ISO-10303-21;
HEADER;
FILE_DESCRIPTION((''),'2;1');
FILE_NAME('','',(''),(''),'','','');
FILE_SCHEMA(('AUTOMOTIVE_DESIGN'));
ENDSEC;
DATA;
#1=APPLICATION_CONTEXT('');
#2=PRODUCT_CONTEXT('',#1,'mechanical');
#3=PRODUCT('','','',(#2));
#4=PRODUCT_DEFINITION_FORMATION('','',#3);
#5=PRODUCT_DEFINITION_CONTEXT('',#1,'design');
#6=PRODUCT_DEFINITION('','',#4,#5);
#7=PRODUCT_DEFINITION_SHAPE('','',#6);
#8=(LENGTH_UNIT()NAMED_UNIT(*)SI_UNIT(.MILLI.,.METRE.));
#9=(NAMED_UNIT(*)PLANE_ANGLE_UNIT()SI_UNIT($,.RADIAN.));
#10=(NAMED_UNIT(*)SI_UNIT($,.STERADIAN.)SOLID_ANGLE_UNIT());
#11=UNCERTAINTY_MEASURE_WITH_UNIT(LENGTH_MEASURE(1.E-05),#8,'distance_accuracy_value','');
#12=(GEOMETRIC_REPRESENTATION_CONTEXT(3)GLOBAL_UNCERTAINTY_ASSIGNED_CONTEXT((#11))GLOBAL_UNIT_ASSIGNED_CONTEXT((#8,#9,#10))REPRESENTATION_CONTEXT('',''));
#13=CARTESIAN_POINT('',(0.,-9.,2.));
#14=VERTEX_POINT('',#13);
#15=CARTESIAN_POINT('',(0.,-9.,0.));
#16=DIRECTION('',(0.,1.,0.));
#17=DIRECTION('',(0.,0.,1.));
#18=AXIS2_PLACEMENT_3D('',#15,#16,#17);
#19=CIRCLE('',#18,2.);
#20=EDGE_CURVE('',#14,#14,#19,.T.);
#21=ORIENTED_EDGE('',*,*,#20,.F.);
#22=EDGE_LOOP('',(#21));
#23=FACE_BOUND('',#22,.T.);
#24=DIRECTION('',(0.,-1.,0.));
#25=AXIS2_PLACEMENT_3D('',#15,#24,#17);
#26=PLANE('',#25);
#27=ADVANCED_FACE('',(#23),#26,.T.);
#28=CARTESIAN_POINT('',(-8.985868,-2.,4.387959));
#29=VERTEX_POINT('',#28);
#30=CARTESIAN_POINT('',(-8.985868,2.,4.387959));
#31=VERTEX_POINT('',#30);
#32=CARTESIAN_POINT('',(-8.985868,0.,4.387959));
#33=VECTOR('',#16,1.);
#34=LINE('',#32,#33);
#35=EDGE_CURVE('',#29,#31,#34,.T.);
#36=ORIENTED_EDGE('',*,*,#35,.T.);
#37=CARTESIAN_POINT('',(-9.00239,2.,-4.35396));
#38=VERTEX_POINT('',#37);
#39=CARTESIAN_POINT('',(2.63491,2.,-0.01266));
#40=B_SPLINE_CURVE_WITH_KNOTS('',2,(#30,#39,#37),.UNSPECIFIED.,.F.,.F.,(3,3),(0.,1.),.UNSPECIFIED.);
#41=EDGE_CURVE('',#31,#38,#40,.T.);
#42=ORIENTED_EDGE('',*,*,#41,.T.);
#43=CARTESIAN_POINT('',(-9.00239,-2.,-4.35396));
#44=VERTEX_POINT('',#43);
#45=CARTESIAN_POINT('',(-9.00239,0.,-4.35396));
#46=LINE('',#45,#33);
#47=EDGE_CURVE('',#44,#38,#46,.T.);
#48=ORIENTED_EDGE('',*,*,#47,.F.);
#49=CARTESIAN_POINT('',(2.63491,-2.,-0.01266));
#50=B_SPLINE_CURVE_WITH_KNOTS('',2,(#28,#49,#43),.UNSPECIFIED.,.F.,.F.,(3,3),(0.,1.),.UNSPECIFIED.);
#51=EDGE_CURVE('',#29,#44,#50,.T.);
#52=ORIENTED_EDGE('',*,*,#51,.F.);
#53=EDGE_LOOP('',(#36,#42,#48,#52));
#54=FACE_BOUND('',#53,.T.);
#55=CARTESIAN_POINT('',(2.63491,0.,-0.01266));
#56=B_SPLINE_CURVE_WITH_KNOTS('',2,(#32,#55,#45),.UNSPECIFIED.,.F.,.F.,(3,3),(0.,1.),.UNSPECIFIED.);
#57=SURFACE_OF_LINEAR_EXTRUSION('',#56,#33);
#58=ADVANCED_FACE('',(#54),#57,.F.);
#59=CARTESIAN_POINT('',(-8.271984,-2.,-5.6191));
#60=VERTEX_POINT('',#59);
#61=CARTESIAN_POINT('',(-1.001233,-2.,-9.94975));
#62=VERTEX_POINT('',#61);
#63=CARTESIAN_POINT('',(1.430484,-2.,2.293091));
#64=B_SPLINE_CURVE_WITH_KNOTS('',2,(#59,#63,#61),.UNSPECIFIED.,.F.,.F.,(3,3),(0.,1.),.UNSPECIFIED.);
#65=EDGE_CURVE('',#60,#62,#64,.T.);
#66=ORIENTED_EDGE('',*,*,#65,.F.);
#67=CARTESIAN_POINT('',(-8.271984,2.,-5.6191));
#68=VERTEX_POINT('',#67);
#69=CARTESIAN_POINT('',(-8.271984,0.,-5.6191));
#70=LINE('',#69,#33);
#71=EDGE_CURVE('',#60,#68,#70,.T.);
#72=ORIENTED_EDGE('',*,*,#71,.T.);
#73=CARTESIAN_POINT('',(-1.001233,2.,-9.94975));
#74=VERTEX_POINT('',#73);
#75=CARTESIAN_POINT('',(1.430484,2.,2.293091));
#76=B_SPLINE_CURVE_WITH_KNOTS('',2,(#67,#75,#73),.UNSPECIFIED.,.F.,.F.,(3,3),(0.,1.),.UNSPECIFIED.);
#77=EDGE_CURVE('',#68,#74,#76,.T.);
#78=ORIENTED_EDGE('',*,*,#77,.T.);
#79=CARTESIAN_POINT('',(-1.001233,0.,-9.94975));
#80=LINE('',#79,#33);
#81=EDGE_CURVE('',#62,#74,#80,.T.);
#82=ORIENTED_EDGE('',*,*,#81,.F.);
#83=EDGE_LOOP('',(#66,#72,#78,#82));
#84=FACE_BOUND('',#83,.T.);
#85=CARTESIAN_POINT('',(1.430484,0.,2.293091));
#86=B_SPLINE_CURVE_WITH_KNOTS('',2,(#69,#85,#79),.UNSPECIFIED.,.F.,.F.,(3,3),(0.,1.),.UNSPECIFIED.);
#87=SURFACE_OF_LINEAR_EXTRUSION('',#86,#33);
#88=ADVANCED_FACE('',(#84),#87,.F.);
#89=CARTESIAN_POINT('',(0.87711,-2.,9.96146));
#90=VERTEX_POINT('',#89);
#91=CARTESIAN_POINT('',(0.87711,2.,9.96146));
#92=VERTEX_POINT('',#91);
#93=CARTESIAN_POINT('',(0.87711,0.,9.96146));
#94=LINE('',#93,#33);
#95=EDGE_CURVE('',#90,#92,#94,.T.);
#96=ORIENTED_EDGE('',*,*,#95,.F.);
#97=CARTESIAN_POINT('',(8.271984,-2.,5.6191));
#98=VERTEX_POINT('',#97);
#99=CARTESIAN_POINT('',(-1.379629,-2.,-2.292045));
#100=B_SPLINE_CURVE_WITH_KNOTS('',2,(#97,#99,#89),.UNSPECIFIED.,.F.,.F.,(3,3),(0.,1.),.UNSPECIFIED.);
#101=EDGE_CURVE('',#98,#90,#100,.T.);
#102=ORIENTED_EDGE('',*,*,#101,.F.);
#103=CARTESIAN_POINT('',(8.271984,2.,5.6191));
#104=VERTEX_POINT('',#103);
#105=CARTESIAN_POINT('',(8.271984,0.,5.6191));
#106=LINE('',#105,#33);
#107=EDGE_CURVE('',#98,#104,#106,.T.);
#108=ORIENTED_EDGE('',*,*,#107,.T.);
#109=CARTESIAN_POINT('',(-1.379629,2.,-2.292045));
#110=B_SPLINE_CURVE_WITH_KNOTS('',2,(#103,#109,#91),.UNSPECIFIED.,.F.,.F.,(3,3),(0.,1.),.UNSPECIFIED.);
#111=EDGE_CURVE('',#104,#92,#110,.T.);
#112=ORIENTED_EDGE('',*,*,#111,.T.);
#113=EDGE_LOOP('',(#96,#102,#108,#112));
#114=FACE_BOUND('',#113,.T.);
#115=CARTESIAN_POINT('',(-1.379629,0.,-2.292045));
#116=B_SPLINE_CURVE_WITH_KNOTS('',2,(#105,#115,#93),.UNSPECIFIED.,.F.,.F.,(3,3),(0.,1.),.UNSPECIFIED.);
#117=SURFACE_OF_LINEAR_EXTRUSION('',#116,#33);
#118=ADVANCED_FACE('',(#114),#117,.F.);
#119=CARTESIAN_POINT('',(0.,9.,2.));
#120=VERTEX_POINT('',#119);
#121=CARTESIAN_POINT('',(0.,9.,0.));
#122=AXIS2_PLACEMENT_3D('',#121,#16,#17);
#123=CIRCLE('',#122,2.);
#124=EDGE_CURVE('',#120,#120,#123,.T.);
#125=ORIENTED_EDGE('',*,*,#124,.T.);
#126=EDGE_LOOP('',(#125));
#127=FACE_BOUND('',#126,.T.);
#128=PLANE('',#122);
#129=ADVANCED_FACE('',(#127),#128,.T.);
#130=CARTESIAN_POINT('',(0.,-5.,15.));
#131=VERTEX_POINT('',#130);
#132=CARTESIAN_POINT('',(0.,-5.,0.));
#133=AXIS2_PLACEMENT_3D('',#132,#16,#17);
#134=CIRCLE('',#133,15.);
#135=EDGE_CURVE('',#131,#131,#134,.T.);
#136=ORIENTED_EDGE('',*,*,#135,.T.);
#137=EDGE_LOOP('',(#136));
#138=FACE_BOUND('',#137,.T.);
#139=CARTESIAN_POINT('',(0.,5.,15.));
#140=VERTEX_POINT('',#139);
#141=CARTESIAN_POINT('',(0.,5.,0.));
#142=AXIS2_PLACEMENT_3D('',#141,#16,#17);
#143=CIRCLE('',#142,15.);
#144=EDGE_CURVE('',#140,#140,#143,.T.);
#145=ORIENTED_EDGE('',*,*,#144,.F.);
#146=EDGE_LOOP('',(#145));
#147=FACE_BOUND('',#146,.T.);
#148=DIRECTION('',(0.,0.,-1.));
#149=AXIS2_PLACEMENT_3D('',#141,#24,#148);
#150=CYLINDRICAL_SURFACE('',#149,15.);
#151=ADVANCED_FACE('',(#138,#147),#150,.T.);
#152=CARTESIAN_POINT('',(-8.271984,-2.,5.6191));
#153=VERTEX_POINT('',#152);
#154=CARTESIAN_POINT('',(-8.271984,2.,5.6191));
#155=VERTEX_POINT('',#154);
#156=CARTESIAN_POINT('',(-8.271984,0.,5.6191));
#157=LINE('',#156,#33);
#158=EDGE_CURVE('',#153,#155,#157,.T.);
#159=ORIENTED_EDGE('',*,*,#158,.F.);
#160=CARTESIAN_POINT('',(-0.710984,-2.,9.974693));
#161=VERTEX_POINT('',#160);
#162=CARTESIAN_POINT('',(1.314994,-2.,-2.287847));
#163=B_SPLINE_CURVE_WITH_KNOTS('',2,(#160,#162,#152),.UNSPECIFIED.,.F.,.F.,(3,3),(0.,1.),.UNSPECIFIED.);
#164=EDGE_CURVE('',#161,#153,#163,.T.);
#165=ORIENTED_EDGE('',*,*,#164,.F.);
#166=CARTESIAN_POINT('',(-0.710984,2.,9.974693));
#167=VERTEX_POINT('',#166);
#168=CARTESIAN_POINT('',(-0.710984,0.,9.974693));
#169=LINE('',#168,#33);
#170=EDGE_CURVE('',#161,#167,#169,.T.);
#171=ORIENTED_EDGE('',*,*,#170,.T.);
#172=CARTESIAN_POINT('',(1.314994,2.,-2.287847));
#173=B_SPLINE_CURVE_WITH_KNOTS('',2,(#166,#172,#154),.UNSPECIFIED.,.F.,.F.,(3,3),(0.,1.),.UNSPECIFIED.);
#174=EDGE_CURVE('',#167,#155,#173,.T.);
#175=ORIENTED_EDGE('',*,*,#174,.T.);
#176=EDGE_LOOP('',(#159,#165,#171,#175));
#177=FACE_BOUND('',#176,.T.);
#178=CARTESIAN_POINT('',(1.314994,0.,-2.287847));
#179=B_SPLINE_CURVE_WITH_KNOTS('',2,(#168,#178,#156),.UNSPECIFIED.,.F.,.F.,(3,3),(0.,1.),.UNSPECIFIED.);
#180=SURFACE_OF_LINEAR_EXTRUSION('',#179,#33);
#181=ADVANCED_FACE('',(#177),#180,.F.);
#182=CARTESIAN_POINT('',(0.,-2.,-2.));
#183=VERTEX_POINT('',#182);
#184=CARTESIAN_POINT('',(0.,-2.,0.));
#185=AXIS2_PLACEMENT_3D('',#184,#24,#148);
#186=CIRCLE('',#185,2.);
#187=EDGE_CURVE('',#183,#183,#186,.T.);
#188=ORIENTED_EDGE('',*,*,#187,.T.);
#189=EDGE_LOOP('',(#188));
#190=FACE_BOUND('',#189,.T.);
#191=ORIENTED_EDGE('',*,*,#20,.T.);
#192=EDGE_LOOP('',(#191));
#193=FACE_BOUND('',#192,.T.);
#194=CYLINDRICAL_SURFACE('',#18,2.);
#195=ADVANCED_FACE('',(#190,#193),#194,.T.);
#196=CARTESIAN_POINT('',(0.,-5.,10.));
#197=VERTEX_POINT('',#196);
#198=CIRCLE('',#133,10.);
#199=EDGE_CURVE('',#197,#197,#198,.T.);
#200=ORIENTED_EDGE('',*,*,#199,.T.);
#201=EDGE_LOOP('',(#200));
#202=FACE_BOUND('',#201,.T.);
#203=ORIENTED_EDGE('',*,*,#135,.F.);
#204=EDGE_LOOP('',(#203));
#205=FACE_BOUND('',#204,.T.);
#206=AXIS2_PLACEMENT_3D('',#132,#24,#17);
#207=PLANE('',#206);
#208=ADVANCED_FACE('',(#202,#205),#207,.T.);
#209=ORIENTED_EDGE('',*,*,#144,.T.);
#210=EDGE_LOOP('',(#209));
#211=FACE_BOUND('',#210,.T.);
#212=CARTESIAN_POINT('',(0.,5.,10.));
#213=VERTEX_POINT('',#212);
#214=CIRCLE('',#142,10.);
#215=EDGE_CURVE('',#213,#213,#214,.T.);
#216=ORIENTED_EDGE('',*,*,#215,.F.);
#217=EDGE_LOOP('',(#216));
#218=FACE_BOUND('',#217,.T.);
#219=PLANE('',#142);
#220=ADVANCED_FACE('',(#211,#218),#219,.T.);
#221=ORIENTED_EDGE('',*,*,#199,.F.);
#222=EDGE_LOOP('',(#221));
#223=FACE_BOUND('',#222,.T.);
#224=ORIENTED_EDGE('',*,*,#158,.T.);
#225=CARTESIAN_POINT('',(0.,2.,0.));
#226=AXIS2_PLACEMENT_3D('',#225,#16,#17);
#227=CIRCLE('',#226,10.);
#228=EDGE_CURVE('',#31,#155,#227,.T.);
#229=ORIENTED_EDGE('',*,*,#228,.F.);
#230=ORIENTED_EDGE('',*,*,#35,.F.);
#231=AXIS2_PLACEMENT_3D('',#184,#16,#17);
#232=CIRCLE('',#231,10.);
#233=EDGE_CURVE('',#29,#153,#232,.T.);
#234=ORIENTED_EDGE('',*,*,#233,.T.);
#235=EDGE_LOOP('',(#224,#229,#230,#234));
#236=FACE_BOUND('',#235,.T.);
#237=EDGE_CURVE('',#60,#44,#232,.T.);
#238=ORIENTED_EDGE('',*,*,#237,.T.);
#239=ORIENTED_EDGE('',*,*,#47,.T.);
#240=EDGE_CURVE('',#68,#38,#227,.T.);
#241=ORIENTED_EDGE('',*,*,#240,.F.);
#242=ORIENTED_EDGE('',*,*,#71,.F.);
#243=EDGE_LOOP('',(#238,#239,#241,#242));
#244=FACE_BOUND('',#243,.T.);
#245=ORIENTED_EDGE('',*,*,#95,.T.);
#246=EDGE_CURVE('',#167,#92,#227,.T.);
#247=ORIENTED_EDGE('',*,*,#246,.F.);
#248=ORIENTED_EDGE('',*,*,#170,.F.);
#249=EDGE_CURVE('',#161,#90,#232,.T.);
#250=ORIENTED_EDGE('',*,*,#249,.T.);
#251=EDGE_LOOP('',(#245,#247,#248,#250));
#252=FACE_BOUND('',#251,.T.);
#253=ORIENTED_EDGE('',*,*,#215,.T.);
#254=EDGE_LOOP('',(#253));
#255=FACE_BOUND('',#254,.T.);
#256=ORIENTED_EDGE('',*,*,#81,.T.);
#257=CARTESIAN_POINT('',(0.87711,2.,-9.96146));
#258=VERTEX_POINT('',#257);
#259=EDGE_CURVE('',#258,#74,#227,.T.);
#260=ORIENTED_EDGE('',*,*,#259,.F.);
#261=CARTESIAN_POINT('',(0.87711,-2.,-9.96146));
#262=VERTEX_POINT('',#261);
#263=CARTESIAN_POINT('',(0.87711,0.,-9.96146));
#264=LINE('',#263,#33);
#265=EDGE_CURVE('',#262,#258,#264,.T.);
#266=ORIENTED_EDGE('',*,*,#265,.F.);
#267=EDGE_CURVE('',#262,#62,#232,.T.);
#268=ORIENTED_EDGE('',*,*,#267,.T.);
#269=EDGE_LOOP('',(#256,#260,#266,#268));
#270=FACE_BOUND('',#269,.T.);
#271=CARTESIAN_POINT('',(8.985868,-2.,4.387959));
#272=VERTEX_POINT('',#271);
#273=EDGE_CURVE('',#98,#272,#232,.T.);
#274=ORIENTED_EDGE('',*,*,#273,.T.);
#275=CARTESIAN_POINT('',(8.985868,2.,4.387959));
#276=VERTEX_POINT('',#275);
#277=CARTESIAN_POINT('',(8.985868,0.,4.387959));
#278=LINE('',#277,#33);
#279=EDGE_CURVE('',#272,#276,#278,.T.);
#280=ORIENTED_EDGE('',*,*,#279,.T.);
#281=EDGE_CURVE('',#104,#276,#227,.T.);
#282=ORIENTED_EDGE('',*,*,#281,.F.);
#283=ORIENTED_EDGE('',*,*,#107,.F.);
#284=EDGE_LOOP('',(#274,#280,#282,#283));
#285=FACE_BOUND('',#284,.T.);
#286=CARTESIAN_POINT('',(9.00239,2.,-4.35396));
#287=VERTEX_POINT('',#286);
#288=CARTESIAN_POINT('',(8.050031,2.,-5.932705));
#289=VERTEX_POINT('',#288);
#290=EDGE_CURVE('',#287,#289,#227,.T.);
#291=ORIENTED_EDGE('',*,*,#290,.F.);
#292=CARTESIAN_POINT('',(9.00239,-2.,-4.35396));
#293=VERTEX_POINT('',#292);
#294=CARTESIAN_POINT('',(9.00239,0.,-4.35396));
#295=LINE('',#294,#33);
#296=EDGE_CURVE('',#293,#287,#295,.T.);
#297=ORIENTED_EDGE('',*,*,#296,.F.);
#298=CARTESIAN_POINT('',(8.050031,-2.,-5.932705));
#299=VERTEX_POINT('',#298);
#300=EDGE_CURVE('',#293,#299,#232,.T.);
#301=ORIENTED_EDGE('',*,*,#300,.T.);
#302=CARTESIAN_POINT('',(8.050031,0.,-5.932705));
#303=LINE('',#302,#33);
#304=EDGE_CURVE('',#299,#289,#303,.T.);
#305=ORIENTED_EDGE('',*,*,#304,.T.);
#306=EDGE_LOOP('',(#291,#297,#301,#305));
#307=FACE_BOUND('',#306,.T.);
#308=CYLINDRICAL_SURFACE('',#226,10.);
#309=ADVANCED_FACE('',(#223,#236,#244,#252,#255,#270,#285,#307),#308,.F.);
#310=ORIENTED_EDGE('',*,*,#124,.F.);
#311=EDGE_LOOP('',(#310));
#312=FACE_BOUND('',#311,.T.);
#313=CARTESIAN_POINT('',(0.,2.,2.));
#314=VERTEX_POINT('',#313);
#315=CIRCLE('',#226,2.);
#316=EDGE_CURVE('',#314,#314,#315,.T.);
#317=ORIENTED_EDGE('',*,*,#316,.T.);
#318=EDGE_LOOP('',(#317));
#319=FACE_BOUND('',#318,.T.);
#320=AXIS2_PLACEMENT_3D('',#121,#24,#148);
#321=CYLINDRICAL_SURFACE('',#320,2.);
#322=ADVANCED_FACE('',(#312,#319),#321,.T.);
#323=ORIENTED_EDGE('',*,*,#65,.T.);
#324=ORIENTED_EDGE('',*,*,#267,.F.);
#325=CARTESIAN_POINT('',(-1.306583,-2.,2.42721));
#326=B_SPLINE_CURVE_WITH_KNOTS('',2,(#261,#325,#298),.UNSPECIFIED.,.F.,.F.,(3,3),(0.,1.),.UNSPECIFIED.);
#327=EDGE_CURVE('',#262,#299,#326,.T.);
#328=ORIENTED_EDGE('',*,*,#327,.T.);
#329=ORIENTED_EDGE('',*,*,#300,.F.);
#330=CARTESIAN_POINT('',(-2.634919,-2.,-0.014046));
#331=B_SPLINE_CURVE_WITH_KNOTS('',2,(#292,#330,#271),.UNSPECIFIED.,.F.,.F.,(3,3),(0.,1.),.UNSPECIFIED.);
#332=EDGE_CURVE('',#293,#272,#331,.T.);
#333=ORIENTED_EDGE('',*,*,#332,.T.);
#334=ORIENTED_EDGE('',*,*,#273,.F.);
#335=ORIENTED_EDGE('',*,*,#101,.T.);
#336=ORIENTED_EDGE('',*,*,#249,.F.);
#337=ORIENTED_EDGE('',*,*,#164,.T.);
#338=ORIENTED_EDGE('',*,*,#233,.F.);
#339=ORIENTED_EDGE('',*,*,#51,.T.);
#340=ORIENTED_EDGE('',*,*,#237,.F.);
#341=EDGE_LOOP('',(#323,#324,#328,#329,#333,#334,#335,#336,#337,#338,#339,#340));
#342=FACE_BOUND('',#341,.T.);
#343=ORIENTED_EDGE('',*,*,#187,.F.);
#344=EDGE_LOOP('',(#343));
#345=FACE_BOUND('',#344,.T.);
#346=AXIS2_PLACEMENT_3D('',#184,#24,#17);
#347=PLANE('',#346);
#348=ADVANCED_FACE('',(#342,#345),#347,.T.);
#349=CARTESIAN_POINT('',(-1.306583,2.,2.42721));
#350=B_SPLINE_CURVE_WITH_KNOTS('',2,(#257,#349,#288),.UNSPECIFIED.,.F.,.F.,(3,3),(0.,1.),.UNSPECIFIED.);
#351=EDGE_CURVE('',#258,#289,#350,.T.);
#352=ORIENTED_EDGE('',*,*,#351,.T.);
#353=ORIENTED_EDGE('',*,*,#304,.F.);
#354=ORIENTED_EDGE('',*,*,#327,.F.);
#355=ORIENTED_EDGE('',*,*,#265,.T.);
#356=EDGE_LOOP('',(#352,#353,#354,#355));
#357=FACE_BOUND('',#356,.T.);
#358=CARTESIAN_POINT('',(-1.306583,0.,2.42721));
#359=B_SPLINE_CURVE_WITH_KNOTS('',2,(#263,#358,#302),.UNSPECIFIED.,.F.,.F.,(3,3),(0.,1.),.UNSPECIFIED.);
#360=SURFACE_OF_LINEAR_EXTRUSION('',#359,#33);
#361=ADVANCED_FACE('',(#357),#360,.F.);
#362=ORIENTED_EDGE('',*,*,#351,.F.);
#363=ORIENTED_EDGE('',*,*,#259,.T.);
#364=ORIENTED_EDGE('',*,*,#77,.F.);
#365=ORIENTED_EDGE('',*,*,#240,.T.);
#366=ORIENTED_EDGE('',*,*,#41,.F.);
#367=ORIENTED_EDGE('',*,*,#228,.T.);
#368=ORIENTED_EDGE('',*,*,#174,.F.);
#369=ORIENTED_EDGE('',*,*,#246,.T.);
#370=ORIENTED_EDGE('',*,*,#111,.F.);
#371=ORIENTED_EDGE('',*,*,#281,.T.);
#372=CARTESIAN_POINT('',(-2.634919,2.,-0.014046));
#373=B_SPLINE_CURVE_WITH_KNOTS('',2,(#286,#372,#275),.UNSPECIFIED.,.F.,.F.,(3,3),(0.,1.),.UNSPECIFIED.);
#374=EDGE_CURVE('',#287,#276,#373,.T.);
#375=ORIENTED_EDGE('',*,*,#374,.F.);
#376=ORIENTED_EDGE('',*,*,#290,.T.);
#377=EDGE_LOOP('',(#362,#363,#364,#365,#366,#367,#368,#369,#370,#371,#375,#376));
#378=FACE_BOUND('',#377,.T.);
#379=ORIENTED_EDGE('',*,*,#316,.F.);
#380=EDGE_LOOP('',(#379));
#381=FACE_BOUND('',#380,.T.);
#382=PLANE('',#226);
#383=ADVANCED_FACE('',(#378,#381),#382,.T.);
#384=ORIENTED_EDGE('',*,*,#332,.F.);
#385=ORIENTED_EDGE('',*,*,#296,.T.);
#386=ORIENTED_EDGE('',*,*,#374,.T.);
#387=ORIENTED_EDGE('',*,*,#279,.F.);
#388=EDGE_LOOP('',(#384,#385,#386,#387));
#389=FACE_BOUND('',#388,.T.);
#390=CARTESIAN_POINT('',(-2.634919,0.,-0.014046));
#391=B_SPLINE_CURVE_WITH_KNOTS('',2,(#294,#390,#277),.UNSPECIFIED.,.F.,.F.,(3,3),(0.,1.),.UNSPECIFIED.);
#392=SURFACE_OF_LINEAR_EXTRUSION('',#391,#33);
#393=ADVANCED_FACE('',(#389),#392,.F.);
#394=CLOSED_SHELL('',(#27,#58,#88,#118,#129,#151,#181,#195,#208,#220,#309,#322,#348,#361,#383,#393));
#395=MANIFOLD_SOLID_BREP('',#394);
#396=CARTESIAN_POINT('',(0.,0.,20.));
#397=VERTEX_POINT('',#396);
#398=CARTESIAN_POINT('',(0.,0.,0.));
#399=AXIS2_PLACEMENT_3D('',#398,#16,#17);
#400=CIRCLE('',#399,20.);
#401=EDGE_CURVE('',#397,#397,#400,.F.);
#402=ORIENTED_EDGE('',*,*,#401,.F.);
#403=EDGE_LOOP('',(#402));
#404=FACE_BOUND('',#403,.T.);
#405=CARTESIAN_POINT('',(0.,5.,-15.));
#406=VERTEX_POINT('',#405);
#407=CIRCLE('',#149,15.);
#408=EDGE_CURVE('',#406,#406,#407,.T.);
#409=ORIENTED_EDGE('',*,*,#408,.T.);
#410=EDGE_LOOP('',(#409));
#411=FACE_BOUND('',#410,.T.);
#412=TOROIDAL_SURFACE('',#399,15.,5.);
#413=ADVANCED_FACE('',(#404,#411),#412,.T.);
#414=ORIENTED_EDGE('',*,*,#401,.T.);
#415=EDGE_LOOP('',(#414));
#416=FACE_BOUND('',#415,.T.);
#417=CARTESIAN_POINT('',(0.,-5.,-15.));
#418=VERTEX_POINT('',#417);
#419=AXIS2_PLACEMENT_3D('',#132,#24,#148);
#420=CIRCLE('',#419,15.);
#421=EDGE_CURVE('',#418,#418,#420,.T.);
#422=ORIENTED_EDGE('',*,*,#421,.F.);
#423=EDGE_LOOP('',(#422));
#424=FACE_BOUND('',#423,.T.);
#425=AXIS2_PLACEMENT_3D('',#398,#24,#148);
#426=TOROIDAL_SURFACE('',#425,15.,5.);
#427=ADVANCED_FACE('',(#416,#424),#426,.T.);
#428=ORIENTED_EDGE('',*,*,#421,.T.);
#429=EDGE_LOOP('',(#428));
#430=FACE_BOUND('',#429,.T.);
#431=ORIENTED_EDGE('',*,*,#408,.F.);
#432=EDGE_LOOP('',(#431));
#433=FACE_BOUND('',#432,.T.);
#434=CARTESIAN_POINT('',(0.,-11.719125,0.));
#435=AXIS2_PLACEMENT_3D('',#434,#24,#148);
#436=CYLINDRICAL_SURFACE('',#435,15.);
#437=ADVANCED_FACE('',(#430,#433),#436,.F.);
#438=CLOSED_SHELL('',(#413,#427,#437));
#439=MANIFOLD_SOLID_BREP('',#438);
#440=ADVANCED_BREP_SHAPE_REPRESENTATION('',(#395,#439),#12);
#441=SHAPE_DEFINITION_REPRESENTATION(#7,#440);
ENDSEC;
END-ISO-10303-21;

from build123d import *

# Parameters (mm, degrees)
CROQUIS1_R              = 15
SALIENTE_EXTRUIR2_DEPTH = 5
CROQUIS3_R              = 10
CORTAR_EXTRUIR2_DEPTH   = 3
CORTAR_EXTRUIR3_DEPTH   = 22.424285286
CROQUIS5_R              = 2
SALIENTE_EXTRUIR3_DEPTH = 7
CROQUIS7_W              = 5
CROQUIS7_H              = 10
REDONDEO1_R             = 5


with BuildPart() as part:
    # Croquis1 → Saliente-Extruir2 (new body)
    with BuildSketch(Plane(origin=(0, 0, 0), x_dir=(1, 0, 0), z_dir=(0, 1, 0))):
        with Locations(Location((0, 0, 0), (0, 0, 270))):
            Circle(CROQUIS1_R)
    saliente_extruir2 = extrude(amount=SALIENTE_EXTRUIR2_DEPTH)

    # Croquis3 → Cortar-Extruir2 (cut)
    with BuildSketch(Plane(origin=(0, 5, 0), x_dir=(1, 0, 0), z_dir=(0, 1, 0))):
        with Locations(Location((0, 0, 0), (0, 0, 270))):
            Circle(CROQUIS3_R)
    cortar_extruir2 = extrude(amount=-CORTAR_EXTRUIR2_DEPTH, mode=Mode.SUBTRACT)

    # Croquis4 → Cortar-Extruir3 (cut, through all)
    with BuildSketch(Plane(origin=(0, 2, 0), x_dir=(1, 0, 0), z_dir=(0, 1, 0))):
        with BuildLine():
            ThreePointArc((-1.001232744, 9.949750398), (-5.117300948, 8.591462681), (-8.271983717, 5.619100051))
            add(Edge.make_bspline(
                [(-1.001232744, 9.949750398), (1.430484014, -2.293091289), (-8.271983717, 5.619100051)],
                knots=[0, 0, 0, 1, 1, 1], degree=2))
        make_face()
        with BuildLine():
            ThreePointArc((-9.002390435, 4.35395986), (-9.999982138, -0.018900569), (-8.985867682, -4.387958751))
            add(Edge.make_bspline(
                [(-9.002390435, 4.35395986), (2.63491032, 0.012659736), (-8.985867682, -4.387958751)],
                knots=[0, 0, 0, 1, 1, 1], degree=2))
        make_face()
        with BuildLine():
            ThreePointArc((8.050031428, 5.932705454), (4.897058005, 8.718877387), (0.877109656, 9.961459665))
            add(Edge.make_bspline(
                [(8.050031428, 5.932705454), (-1.306582901, -2.427210179), (0.877109656, 9.961459665)],
                knots=[0, 0, 0, 1, 1, 1], degree=2))
        make_face()
        with BuildLine():
            ThreePointArc((8.985867682, -4.387958751), (9.999982138, -0.018900569), (9.002390435, 4.35395986))
            add(Edge.make_bspline(
                [(8.985867682, -4.387958751), (-2.63491918, 0.014046153), (9.002390435, 4.35395986)],
                knots=[0, 0, 0, 1, 1, 1], degree=2))
        make_face()
        with BuildLine():
            ThreePointArc((0.877109656, -9.961459665), (5.063644848, -8.623195513), (8.271983717, -5.619100051))
            add(Edge.make_bspline(
                [(0.877109656, -9.961459665), (-1.379629203, 2.292044769), (8.271983717, -5.619100051)],
                knots=[0, 0, 0, 1, 1, 1], degree=2))
        make_face()
        with BuildLine():
            ThreePointArc((-8.271983717, -5.619100051), (-4.991615636, -8.665089344), (-0.710984409, -9.974693036))
            add(Edge.make_bspline(
                [(-8.271983717, -5.619100051), (1.314994367, 2.287846827), (-0.710984409, -9.974693036)],
                knots=[0, 0, 0, 1, 1, 1], degree=2))
        make_face()
    cortar_extruir3 = extrude(amount=-CORTAR_EXTRUIR3_DEPTH, mode=Mode.SUBTRACT)

    # Croquis5 → Saliente-Extruir3 (add)
    with BuildSketch(Plane(origin=(0, 2, 0), x_dir=(1, 0, 0), z_dir=(0, 1, 0))):
        with Locations(Location((0, 0, 0), (0, 0, 270))):
            Circle(CROQUIS5_R)
    saliente_extruir3 = extrude(amount=SALIENTE_EXTRUIR3_DEPTH)

    # Simetría2: Saliente-Extruir2, Cortar-Extruir2, Cortar-Extruir3, Saliente-Extruir3 across plane
    add(saliente_extruir2.mirror(Plane.ZX))
    add(cortar_extruir2.mirror(Plane.ZX), mode=Mode.SUBTRACT)
    add(cortar_extruir3.mirror(Plane.ZX), mode=Mode.SUBTRACT)
    add(saliente_extruir3.mirror(Plane.ZX))


with BuildPart() as body_2:
    # Croquis7 → Revolución3 (revolve)
    with BuildSketch(Plane.XY, mode=Mode.PRIVATE) as revoluci_n3_sk:
        with Locations((-17.5, 0)):
            Rectangle(CROQUIS7_W, CROQUIS7_H)
    revolve(revoluci_n3_sk.sketch.rotate(Axis((0, -11.719124905, 0), (0, 1, 0)), 270), axis=Axis((0, -11.719124905, 0), (0, 1, 0)))

    # Redondeo1
    redondeo1_edges = [body_2.edges().sort_by_distance(p)[0] for p in [
        (0, -5, 20),
        (0, 5, 20),
    ]]
    fillet(redondeo1_edges, radius=REDONDEO1_R - 0.0001)  # a hair under: the kernel refuses the full size


solid = Compound([part.part, body_2.part])
